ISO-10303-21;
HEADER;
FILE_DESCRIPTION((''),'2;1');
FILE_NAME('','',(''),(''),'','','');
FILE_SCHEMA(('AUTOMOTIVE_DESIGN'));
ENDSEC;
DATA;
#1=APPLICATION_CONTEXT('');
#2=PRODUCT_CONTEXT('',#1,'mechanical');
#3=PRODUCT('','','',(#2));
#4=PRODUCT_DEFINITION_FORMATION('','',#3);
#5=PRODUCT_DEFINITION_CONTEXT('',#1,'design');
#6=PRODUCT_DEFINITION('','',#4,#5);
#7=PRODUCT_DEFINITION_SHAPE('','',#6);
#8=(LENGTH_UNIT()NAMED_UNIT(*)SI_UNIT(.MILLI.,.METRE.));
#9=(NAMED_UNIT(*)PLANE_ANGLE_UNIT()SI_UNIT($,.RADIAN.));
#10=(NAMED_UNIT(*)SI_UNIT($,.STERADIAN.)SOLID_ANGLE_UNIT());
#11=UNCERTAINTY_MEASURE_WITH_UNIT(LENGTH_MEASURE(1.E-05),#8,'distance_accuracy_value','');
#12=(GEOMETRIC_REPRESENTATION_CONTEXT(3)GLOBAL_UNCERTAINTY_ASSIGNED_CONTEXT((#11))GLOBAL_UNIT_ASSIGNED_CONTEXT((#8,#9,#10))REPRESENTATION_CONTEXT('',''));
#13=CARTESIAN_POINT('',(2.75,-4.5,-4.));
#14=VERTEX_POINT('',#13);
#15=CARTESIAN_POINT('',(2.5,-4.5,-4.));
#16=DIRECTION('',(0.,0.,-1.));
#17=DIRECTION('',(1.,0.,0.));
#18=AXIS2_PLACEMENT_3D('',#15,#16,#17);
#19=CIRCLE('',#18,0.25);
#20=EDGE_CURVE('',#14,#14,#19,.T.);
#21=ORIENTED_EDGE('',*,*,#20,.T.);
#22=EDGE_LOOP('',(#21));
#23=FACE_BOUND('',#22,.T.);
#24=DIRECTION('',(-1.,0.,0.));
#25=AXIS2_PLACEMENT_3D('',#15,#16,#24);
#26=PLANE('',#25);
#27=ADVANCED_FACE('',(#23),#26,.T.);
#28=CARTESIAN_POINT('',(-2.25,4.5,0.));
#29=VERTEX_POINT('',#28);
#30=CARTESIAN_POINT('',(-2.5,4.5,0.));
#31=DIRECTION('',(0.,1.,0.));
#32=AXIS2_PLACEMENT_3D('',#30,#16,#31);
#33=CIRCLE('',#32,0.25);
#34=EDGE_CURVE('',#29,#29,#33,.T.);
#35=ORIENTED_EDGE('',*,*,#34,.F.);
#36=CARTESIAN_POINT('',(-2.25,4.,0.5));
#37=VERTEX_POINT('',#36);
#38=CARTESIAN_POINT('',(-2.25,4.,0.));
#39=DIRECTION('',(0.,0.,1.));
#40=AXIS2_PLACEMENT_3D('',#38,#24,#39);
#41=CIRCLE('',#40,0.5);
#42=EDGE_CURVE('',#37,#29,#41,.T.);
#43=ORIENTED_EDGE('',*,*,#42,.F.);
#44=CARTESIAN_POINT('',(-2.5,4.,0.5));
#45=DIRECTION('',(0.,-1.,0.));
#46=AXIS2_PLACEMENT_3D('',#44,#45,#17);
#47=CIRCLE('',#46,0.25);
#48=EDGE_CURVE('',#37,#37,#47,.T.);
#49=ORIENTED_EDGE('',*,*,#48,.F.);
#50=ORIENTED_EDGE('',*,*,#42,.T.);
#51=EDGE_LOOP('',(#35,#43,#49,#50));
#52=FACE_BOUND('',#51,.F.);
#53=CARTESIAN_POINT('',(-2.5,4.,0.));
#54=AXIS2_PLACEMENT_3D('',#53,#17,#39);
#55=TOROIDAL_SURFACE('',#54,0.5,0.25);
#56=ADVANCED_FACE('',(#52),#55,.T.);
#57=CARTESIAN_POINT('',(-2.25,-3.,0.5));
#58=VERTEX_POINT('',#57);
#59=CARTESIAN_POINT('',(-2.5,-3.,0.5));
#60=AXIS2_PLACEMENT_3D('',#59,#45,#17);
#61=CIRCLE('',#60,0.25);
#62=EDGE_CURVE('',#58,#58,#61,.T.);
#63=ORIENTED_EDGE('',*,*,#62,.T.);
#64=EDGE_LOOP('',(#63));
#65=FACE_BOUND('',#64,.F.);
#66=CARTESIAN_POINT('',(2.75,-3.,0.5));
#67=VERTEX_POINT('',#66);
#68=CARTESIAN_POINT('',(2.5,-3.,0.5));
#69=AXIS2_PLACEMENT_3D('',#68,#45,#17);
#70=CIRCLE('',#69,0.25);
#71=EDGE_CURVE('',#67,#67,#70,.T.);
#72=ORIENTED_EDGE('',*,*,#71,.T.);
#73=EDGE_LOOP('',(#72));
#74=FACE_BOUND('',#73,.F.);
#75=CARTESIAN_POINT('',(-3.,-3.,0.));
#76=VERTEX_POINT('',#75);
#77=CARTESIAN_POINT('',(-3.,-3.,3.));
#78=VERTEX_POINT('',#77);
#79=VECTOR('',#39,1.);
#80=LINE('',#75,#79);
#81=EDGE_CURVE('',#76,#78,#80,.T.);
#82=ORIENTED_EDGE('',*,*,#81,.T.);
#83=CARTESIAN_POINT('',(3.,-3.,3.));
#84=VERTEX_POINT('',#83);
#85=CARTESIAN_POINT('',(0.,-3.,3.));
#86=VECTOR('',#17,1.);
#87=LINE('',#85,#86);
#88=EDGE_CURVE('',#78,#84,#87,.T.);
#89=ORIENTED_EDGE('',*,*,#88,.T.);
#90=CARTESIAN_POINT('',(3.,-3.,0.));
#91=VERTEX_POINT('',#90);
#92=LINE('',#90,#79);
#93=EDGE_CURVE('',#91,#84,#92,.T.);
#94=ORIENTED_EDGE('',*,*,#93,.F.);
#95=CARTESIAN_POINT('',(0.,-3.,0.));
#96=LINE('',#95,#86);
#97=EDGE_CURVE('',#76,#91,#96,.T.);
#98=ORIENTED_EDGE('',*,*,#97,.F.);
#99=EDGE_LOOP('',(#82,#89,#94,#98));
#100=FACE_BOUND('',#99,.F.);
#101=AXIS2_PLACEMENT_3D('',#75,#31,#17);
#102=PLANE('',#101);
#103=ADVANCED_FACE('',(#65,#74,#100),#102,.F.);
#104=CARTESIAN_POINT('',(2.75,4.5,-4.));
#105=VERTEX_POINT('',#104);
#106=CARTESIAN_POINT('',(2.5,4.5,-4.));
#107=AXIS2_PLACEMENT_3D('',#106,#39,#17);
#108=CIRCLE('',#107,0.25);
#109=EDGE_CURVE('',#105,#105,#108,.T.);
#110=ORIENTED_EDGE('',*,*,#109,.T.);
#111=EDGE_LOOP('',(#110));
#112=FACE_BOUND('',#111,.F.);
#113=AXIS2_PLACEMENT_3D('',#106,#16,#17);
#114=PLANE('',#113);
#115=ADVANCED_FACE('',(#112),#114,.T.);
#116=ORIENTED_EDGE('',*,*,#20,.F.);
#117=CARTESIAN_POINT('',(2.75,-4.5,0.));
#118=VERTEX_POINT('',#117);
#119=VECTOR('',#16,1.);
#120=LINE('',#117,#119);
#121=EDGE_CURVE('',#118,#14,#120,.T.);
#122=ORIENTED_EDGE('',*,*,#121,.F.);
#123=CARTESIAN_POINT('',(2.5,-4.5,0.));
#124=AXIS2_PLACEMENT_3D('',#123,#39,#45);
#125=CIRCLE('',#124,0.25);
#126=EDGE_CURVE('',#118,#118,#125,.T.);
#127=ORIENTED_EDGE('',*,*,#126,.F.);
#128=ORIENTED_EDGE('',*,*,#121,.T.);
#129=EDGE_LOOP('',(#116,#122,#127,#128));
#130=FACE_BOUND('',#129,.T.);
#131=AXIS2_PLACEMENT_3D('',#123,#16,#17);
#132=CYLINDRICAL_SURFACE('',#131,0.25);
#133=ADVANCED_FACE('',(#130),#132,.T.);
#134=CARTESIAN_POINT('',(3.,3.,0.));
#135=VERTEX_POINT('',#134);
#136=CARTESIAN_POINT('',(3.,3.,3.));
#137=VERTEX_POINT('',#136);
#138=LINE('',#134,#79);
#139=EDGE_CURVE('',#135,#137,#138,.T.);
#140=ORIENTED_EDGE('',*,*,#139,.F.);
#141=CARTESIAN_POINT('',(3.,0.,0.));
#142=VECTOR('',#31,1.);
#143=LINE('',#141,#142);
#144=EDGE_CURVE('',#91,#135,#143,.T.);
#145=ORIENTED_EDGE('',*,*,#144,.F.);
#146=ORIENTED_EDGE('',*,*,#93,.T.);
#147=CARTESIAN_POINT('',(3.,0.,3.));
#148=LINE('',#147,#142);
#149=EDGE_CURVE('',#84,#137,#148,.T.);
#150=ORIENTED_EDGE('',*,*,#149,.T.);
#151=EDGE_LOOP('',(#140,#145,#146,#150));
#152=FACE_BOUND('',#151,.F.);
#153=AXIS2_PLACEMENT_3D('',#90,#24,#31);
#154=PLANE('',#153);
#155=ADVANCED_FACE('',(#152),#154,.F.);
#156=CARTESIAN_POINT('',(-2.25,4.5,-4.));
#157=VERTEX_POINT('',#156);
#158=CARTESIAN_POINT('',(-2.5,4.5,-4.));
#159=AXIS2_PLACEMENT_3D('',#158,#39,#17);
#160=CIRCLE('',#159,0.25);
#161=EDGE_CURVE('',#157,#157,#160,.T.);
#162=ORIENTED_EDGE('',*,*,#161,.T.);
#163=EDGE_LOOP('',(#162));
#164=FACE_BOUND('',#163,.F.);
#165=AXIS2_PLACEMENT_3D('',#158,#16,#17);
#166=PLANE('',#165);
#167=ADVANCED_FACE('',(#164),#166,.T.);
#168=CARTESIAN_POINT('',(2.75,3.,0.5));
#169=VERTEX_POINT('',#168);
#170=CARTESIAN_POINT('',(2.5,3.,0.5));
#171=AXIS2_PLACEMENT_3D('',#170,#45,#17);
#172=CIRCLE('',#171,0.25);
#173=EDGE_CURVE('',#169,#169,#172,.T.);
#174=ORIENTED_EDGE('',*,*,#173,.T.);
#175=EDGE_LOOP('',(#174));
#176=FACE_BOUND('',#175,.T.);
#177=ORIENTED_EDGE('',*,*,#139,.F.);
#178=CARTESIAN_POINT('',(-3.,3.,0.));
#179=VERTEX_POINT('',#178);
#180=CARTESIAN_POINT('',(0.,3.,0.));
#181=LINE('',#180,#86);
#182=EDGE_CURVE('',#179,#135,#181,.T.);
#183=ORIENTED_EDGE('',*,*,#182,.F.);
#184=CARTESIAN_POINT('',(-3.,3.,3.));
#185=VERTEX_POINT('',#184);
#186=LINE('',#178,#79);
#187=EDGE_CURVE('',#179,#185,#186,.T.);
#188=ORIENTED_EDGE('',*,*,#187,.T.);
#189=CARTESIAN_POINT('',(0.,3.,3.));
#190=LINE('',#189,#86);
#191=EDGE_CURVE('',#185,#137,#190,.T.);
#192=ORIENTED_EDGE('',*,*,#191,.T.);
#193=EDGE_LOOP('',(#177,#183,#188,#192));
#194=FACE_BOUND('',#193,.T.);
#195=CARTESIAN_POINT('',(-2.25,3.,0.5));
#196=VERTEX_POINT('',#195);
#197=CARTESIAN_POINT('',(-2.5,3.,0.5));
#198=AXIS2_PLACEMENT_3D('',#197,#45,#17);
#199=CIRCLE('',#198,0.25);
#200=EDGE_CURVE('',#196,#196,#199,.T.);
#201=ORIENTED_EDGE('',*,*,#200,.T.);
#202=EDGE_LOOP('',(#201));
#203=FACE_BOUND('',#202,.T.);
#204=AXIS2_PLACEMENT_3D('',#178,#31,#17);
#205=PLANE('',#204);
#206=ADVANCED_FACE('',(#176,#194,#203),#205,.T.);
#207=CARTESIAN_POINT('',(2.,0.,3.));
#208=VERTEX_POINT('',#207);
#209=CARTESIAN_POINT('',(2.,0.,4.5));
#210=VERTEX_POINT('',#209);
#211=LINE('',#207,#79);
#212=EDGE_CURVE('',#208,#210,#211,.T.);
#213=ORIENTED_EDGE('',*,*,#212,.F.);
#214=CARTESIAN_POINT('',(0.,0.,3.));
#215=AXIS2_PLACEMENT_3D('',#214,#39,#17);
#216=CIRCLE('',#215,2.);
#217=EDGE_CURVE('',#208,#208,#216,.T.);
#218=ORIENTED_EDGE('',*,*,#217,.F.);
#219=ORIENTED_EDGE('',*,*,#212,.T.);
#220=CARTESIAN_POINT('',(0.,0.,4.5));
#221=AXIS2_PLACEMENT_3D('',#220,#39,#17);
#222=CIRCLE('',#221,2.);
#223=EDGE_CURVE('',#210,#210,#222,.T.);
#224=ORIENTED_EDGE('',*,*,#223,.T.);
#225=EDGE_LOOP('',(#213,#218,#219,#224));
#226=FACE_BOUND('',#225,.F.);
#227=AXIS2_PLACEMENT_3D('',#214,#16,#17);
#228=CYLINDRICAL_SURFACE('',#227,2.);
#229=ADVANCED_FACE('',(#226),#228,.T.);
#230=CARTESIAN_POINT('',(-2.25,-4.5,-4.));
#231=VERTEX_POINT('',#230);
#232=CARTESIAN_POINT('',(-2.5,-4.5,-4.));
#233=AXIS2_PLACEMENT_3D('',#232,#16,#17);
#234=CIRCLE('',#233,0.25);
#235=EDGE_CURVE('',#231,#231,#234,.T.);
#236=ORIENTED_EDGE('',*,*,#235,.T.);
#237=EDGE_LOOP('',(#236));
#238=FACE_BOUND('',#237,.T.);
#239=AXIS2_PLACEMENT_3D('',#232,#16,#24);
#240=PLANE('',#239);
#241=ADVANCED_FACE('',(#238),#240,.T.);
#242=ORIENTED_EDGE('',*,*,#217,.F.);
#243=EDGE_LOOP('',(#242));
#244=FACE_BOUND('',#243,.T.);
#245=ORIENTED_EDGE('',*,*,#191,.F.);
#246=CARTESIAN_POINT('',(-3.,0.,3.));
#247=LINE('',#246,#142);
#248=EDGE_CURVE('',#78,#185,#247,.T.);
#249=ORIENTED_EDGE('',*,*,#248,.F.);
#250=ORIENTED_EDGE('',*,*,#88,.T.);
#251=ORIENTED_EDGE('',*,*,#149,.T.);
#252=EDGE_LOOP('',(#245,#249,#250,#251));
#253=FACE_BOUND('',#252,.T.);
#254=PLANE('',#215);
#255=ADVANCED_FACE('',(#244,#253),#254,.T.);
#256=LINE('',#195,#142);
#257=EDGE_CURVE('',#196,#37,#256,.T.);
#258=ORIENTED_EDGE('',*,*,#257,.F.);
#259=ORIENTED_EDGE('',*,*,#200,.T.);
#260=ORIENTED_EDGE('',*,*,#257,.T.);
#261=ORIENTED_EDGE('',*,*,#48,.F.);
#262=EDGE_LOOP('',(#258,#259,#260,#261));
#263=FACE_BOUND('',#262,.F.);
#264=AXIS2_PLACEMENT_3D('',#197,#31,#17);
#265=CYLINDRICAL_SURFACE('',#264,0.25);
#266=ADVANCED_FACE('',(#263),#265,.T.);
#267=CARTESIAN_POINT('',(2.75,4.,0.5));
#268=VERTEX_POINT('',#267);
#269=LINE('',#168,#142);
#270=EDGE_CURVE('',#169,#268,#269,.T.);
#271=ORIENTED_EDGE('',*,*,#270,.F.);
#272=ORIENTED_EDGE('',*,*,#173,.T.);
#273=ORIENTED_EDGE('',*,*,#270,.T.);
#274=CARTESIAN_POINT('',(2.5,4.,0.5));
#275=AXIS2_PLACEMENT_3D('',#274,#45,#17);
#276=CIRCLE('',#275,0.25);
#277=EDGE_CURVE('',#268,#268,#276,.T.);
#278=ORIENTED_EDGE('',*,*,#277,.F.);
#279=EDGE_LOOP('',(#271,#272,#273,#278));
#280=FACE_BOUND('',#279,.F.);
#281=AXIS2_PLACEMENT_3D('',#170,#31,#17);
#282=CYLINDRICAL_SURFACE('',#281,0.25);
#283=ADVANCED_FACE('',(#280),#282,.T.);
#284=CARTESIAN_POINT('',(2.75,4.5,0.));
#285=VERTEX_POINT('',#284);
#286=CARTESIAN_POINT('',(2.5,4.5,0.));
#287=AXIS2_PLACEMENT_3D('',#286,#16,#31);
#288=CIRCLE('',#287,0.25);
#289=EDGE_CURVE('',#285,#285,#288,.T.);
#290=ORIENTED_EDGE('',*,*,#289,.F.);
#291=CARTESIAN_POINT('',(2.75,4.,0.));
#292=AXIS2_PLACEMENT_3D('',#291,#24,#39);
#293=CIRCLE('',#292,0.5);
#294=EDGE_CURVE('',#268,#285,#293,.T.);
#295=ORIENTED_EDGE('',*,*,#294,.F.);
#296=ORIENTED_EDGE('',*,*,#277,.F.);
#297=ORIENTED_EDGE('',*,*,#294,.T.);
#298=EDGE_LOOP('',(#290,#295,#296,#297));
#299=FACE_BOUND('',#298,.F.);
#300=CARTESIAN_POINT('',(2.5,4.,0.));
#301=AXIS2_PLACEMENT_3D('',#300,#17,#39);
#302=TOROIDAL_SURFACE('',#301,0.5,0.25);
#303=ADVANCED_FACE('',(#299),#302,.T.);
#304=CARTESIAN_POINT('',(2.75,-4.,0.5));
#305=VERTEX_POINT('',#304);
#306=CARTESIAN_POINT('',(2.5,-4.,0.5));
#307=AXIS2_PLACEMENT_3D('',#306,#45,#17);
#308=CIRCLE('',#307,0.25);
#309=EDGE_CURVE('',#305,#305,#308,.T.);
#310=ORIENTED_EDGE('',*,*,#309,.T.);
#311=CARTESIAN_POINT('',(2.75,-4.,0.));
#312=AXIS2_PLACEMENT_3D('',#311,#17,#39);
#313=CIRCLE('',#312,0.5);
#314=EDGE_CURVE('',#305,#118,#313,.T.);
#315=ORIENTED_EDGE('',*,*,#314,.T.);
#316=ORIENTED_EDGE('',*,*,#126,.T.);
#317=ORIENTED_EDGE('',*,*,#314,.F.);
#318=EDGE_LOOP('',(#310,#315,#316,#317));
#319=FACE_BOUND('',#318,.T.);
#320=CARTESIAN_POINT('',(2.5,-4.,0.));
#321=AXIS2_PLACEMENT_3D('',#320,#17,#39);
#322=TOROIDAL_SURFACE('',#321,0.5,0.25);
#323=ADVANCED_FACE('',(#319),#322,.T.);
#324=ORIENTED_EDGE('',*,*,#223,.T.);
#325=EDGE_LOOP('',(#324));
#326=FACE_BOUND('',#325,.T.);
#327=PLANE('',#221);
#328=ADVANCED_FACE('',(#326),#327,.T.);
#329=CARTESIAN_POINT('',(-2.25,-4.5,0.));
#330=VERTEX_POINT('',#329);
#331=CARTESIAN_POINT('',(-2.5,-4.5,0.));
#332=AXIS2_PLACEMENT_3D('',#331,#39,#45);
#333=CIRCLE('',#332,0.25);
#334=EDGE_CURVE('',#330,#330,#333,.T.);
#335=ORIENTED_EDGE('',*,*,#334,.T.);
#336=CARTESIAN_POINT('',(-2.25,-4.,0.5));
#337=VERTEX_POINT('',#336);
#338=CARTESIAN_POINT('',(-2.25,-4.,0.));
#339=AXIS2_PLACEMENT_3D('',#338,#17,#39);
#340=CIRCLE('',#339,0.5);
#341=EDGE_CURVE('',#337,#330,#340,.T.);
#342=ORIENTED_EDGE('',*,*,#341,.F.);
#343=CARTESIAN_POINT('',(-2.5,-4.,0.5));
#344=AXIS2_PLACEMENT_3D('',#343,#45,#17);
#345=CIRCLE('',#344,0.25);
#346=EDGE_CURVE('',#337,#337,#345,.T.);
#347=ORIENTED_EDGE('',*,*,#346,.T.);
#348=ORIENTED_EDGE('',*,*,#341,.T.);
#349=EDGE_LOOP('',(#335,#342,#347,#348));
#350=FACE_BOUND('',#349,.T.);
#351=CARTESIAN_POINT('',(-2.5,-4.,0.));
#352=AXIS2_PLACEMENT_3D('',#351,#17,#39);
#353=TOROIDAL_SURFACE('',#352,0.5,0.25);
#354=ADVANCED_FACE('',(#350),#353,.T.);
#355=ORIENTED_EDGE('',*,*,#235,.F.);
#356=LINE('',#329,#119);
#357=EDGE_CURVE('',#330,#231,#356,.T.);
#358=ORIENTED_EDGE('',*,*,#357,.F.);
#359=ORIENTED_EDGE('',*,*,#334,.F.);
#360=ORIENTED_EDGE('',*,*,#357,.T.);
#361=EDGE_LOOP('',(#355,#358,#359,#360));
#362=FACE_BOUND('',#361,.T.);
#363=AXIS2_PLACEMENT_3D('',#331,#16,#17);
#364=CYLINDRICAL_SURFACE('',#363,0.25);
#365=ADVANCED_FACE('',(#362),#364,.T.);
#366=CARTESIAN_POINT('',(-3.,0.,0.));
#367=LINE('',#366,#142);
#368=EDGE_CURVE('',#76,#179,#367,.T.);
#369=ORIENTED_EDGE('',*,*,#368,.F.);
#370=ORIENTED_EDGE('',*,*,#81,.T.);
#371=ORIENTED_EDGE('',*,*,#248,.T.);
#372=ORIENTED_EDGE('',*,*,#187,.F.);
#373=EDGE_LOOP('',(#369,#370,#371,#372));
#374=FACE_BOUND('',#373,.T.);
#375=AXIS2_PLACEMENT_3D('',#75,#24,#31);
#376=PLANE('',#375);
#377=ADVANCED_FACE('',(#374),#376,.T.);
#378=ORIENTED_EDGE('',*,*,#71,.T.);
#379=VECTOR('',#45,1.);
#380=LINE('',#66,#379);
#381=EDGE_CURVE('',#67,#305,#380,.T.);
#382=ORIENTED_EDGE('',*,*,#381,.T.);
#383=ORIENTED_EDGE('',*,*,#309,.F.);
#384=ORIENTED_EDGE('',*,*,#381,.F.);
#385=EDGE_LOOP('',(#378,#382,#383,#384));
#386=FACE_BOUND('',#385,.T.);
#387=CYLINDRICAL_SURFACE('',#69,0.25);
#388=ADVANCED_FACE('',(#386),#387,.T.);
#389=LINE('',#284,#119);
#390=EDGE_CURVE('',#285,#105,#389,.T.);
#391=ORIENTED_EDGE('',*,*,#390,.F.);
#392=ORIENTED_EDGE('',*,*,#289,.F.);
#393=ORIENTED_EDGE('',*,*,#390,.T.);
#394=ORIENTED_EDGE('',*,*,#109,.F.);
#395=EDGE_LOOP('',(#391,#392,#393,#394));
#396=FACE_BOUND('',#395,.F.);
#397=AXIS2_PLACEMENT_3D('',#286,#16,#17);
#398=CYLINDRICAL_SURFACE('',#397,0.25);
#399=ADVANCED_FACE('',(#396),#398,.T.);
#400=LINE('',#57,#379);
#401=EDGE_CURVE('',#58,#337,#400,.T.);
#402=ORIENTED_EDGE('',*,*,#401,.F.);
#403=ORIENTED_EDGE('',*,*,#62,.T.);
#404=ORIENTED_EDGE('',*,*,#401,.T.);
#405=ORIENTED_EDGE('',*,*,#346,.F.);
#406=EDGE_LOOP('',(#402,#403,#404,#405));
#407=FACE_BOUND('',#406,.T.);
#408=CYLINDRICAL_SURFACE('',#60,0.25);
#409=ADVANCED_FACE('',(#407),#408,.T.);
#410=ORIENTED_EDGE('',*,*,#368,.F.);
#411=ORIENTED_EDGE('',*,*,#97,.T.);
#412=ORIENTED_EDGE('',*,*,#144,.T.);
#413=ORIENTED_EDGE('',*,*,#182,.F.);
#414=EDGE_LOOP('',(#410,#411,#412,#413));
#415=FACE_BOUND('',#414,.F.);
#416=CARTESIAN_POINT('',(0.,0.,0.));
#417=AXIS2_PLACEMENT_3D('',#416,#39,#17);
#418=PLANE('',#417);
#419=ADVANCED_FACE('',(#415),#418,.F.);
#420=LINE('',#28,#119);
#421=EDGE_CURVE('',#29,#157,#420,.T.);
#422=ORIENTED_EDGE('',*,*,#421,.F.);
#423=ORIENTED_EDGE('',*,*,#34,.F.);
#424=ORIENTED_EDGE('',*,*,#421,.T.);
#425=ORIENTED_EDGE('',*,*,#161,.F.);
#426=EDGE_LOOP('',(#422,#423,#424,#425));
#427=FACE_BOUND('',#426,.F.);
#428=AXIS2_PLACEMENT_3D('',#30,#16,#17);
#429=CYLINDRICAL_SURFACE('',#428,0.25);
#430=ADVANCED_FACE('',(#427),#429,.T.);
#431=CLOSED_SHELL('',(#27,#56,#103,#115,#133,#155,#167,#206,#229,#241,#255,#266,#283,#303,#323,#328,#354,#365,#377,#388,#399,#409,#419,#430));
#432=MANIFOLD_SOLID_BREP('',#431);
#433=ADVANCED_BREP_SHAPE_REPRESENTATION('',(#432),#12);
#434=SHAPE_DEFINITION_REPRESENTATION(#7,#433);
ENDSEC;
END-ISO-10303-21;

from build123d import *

# Parameters (mm, degrees)
F0_W     = 6
F0_H     = 6
F1_DEPTH = 3
F2_R     = 2
F3_DEPTH = 1.5
F4_R     = 0.25


# Not quite as in the source:
# - a pattern or mirror of a feature is missing from the dataset's text; its kind, count and spacing are read off the source's solid


with BuildPart() as f1:
    # F0 (on Top) → F1 (new body)
    with BuildSketch(Plane.XY):
        Rectangle(F0_W, F0_H)
    extrude(amount=F1_DEPTH)

    # F2 (on face) → F3 (join)
    with BuildSketch(Plane.XY.offset(3)):
        Circle(F2_R)
    extrude(amount=F3_DEPTH)

    # F6: sweep along a path in F5
    with BuildLine(Plane(origin=(-3, 0, 0), x_dir=(0, -1, 0), z_dir=(-1, 0, 0))) as f6_path:
        Line((3, 0.7), (4, 0.7))
        ThreePointArc((4, 0.7), (4.4949747468, 0.4949747468), (4.7, 0))
        Line((4.7, 0), (4.7, -4))
    # F4 (on face) → F6 (sweep)
    with BuildSketch(Plane.XZ.offset(3)):
        with Locations((-2.5, 0.5)):
            Circle(F4_R)
        with Locations((2.5, 0.5)):
            Circle(F4_R)
    f6 = sweep(path=f6_path.line)

    # F6_copies: F6 across plane
    add(f6.mirror(Plane.ZX))


solid = f1.part
